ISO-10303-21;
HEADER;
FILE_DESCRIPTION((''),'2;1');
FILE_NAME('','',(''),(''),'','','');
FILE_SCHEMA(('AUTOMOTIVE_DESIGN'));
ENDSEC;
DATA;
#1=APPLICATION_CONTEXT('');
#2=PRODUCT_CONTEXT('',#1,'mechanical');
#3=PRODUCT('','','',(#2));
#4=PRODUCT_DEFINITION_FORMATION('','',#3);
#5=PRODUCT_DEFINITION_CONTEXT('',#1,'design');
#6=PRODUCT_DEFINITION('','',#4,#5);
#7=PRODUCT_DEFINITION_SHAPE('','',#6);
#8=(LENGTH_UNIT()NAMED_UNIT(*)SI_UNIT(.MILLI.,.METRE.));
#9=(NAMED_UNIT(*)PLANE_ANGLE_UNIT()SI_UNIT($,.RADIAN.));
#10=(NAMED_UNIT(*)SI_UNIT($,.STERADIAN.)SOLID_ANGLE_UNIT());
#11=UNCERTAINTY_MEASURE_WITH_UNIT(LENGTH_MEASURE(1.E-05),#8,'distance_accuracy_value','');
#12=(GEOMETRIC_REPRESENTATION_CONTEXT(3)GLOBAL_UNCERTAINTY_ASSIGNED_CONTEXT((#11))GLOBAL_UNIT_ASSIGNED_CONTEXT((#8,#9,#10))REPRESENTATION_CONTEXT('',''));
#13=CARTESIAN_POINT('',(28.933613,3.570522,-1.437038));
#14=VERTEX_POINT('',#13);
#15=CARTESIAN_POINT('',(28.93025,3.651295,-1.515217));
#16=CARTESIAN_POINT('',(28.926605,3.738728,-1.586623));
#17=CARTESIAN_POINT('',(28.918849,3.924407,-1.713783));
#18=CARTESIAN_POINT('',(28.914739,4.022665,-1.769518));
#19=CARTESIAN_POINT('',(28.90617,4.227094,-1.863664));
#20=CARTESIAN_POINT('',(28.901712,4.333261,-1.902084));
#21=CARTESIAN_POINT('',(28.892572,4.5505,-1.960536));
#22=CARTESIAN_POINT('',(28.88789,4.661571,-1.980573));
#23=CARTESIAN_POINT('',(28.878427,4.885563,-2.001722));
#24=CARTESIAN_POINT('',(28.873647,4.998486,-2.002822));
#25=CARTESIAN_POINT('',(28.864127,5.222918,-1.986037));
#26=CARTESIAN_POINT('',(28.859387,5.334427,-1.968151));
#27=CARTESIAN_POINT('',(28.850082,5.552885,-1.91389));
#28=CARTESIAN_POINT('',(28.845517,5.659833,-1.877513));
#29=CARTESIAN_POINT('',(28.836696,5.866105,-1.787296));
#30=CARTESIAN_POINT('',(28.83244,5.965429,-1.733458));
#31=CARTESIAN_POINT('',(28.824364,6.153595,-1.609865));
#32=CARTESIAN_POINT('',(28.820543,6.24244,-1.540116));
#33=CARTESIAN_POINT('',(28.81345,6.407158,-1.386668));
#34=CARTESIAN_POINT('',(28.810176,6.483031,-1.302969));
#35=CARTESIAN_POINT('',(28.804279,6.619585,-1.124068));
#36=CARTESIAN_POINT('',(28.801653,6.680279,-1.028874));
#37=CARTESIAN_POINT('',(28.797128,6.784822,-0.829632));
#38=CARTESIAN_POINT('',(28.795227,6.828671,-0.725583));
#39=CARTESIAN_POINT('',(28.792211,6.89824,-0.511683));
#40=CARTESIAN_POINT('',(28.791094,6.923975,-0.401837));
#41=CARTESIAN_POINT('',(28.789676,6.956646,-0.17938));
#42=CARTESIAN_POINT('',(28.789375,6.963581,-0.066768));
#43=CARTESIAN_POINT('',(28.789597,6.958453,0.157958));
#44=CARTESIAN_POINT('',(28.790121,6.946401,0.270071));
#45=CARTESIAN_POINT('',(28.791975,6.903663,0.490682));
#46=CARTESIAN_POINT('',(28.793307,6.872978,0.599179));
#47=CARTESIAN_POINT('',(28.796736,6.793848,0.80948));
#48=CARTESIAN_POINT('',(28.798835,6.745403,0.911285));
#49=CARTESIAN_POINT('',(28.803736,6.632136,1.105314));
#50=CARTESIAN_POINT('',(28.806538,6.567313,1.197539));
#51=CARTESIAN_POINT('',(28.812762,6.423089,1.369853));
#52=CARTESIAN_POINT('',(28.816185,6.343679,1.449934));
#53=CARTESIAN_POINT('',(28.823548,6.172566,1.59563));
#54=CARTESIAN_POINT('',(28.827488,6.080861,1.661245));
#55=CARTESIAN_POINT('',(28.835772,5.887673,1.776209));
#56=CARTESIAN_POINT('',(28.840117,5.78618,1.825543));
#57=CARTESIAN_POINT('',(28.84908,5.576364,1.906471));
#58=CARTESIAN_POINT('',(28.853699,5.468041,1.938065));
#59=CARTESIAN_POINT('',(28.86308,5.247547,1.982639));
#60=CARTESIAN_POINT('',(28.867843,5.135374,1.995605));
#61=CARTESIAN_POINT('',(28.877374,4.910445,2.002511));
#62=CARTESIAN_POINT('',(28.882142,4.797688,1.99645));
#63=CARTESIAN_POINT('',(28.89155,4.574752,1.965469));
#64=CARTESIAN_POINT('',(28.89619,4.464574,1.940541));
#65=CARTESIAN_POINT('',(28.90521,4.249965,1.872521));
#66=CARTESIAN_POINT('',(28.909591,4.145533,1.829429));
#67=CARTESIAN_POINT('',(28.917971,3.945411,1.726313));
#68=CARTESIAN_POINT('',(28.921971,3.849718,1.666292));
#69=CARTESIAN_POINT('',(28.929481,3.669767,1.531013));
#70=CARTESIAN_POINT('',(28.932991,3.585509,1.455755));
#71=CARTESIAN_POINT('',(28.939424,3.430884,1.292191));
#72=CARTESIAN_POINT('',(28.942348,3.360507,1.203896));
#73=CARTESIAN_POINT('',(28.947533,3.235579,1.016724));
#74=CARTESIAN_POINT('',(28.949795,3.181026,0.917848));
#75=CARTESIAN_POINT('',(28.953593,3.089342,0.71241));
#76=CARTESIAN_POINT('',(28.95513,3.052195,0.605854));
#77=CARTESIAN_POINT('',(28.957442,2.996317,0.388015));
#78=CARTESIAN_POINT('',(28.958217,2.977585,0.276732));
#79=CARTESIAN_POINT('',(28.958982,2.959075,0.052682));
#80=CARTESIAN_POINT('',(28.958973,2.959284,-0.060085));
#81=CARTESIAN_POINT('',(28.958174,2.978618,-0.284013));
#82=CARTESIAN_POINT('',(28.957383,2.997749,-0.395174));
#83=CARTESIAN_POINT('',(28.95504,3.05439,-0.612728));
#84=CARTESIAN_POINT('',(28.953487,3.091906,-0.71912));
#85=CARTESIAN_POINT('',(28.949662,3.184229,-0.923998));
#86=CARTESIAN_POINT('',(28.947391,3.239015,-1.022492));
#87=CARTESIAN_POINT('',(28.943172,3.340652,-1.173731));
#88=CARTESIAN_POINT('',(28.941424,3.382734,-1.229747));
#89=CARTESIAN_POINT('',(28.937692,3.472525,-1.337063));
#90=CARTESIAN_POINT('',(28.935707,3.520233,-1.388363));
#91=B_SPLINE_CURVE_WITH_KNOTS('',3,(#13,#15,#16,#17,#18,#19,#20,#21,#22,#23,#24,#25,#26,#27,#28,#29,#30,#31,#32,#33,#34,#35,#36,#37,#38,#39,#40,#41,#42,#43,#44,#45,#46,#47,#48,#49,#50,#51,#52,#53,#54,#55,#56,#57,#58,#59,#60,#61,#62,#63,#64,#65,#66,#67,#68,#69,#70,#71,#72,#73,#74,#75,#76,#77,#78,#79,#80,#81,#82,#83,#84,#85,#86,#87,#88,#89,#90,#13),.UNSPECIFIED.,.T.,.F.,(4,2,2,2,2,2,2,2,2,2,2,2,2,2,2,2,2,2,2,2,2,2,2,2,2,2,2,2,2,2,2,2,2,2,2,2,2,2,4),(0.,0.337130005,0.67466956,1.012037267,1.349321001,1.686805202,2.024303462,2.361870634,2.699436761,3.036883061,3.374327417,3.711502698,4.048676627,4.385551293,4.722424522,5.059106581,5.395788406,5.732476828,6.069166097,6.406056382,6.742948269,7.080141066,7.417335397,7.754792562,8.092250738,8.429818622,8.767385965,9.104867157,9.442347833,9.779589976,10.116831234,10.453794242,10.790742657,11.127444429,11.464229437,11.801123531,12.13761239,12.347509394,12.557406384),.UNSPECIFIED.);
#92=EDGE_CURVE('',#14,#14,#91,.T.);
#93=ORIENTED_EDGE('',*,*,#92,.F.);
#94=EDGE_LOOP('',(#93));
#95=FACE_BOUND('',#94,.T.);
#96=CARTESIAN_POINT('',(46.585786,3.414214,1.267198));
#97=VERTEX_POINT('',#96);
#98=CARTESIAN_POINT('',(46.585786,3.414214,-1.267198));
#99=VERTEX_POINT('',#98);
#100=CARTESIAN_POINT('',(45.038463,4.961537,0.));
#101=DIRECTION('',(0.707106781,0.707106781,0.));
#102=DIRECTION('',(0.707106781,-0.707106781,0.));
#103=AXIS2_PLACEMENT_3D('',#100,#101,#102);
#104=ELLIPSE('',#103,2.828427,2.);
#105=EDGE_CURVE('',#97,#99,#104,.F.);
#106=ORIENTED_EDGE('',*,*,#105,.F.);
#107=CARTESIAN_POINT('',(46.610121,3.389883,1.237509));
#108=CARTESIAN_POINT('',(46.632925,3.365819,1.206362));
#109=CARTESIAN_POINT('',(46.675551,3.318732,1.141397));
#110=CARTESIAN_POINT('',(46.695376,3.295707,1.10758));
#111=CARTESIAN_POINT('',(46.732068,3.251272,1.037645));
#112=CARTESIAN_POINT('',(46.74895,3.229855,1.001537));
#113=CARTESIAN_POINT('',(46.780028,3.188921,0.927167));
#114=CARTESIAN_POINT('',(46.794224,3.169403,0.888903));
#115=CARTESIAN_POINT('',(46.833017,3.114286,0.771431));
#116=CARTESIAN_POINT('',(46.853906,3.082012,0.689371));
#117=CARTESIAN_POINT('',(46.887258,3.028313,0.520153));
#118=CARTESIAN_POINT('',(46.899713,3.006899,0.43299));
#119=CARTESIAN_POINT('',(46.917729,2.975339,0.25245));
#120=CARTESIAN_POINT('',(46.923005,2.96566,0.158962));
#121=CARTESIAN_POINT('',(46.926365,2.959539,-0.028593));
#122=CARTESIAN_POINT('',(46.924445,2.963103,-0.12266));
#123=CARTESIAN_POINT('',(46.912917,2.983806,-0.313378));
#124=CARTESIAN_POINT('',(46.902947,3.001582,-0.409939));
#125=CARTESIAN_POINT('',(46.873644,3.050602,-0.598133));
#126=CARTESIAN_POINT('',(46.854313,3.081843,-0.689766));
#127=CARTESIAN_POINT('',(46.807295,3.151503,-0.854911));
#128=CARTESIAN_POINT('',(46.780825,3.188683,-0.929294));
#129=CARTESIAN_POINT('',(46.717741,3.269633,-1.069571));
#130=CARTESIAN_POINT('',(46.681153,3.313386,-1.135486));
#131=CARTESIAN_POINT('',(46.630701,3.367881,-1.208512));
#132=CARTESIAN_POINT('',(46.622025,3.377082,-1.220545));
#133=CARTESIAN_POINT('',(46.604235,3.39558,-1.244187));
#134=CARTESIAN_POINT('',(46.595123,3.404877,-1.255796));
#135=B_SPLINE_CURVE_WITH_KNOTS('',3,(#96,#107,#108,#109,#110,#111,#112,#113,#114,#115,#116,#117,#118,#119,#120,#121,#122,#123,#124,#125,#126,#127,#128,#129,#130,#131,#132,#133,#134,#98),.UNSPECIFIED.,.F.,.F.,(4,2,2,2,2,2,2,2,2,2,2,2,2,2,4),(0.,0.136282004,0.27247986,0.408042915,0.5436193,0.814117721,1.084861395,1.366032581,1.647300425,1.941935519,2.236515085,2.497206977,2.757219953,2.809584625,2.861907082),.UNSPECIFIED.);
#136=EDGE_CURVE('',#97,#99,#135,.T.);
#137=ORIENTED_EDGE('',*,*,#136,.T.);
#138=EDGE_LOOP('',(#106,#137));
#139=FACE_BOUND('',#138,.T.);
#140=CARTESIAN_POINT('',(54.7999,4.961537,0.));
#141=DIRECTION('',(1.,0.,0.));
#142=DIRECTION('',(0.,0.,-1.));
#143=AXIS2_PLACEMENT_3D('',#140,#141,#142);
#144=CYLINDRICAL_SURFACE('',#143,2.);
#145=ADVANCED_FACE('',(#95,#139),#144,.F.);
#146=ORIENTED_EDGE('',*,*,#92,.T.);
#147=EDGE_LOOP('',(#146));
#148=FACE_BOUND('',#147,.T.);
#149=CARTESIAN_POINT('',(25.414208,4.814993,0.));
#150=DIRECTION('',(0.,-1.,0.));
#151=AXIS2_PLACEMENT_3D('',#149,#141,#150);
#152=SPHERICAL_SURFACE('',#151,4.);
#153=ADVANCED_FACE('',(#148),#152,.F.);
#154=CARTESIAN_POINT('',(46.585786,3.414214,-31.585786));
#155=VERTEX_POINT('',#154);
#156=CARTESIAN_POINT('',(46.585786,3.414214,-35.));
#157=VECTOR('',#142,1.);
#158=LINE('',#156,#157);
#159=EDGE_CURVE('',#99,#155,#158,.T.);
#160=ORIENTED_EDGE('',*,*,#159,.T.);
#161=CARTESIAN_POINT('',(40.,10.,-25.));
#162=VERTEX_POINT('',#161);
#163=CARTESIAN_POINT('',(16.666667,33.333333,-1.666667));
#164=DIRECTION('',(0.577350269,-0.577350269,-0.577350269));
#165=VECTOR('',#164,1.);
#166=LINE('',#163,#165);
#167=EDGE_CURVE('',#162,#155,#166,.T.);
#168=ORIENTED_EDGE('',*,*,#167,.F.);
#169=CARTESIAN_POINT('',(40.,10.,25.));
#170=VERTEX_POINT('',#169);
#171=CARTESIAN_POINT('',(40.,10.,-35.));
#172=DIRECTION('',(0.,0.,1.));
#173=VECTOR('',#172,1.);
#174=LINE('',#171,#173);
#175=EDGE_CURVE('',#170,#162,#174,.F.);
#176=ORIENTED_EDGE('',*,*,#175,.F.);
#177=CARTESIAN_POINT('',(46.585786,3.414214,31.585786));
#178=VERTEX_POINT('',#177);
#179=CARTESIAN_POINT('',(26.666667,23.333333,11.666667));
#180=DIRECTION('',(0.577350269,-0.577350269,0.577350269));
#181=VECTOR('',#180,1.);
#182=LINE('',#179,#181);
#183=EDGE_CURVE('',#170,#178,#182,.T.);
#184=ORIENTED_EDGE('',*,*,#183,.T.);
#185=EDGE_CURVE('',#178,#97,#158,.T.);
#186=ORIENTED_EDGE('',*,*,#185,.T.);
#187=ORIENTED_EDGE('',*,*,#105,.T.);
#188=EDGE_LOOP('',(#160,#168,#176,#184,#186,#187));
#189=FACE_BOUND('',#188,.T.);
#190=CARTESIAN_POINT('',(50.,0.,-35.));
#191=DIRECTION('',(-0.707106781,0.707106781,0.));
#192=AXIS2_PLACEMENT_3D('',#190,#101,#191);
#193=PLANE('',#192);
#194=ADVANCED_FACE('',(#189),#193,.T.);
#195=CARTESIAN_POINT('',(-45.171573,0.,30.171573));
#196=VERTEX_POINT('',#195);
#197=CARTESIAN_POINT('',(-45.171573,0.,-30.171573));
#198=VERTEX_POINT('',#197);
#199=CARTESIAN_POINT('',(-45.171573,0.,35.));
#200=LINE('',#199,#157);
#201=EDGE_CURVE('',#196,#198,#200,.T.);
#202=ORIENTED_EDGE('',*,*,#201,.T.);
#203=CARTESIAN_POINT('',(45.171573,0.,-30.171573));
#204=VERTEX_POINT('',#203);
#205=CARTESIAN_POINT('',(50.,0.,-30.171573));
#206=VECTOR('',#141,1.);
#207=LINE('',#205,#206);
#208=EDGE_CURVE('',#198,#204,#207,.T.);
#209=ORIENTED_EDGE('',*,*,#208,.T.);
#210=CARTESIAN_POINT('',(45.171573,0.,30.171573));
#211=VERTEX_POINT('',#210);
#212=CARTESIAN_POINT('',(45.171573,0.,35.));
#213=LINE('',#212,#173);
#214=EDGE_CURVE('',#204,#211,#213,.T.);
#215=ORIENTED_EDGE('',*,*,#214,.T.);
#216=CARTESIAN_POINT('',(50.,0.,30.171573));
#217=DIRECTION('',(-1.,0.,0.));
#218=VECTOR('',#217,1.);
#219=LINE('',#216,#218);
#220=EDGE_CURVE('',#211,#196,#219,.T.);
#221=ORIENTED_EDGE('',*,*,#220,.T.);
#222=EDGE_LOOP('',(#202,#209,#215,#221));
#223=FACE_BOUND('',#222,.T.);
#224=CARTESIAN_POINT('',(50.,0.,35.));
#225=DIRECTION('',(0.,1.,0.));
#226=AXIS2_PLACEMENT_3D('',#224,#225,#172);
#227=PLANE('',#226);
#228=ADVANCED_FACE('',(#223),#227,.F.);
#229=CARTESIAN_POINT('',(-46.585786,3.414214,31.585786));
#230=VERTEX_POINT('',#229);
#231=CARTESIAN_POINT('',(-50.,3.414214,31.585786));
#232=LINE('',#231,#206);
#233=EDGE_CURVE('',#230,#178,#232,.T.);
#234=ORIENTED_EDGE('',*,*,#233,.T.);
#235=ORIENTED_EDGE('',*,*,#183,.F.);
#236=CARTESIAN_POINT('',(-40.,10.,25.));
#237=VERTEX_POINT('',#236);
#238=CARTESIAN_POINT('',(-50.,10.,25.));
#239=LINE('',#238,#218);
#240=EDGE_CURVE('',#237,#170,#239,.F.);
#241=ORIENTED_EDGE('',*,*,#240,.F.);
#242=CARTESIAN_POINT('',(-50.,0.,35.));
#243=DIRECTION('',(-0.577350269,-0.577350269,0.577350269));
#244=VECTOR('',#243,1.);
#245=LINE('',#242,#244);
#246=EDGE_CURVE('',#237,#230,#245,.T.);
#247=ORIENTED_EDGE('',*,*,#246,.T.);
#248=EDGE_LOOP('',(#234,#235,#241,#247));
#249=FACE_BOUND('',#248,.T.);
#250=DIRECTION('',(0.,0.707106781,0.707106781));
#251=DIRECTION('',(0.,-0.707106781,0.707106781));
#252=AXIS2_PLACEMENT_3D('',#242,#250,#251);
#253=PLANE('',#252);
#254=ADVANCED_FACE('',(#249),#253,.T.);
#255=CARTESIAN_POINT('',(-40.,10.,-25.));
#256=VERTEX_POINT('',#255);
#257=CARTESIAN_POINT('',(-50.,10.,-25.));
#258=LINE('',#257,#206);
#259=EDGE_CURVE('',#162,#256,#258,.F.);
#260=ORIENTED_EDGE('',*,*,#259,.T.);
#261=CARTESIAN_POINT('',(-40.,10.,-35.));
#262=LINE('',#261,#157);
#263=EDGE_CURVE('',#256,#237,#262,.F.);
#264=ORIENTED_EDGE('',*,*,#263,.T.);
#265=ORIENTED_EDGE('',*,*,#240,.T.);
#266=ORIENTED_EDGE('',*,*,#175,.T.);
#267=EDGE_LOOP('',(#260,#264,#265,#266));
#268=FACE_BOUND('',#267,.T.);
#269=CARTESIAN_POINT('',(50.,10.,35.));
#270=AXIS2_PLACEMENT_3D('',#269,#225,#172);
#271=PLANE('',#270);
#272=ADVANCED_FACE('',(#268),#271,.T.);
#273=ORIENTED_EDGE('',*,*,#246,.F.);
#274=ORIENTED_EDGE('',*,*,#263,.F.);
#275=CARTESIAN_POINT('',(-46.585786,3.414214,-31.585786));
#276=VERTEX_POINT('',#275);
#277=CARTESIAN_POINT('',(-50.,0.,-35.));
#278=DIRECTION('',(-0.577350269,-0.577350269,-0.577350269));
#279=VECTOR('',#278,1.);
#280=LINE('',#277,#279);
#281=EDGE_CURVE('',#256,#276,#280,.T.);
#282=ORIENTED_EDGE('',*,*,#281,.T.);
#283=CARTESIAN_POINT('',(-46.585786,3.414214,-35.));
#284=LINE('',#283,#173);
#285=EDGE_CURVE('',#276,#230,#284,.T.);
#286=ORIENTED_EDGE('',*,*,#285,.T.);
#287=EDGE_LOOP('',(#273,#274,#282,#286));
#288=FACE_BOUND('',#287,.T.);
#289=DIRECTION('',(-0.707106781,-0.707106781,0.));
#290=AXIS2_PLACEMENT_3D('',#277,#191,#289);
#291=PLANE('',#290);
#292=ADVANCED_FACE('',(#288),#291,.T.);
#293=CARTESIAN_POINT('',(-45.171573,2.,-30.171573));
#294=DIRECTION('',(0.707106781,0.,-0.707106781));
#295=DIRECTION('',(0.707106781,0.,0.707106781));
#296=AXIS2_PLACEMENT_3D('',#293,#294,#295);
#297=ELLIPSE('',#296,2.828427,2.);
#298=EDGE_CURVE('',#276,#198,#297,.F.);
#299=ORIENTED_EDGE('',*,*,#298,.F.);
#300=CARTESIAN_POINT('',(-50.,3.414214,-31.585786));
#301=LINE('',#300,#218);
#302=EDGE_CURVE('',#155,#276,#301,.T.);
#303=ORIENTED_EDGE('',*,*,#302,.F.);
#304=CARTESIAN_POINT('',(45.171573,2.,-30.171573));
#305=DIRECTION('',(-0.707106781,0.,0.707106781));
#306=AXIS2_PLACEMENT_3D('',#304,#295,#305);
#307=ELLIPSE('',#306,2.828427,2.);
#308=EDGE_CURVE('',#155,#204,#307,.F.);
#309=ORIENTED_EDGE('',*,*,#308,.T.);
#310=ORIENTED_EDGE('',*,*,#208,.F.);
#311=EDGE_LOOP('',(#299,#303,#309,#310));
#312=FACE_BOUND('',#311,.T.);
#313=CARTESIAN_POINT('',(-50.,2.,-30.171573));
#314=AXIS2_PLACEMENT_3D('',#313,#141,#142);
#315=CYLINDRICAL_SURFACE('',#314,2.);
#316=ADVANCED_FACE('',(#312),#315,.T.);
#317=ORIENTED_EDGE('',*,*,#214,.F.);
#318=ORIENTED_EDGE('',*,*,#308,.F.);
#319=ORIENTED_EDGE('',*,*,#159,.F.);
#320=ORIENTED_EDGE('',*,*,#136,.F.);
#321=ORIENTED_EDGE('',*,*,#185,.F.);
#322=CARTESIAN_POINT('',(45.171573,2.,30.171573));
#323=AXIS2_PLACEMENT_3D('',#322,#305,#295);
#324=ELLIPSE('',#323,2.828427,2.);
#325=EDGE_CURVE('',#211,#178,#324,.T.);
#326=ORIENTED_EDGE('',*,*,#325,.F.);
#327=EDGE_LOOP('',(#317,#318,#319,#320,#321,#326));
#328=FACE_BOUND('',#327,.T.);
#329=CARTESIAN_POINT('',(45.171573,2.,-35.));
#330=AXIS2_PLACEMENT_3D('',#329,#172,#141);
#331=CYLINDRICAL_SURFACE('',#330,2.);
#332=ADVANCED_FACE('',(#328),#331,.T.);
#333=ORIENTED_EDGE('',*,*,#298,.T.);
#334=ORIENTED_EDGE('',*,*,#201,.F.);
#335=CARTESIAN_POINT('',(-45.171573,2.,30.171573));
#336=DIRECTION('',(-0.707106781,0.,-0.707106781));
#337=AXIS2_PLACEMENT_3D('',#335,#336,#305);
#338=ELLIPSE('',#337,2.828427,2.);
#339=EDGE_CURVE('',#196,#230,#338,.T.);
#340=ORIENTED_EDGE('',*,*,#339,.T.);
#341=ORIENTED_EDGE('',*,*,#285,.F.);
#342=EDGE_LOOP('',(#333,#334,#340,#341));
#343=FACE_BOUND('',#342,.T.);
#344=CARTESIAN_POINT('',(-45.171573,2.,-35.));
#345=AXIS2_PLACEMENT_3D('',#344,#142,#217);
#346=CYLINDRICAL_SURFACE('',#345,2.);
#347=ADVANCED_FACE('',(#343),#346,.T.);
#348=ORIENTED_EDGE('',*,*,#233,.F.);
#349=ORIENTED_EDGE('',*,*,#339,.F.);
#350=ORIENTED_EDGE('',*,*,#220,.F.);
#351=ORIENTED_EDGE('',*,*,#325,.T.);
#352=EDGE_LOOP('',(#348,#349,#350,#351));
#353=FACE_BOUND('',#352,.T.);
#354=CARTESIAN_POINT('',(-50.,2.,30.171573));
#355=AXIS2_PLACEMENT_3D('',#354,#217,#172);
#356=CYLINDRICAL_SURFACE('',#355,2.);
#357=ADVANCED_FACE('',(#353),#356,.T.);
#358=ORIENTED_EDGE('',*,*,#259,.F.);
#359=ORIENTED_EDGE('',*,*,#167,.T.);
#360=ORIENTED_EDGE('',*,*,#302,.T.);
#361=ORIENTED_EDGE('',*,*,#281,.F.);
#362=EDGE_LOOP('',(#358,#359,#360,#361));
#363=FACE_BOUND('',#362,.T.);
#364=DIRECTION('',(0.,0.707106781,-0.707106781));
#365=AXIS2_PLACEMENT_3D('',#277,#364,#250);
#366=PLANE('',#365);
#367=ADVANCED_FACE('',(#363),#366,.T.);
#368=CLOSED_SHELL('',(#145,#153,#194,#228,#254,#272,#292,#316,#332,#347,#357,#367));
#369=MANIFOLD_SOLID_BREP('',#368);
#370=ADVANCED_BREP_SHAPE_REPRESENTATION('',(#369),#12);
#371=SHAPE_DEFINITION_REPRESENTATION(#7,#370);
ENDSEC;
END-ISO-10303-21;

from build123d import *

# Parameters (mm, degrees)
SKETCH_1_W      = 100
SKETCH_1_H      = 70
EXTRUDE_1_DEPTH = 10
EXTRUDE_1_TAPER = 45
SKETCH_5_W      = 28.87382981
SKETCH_5_H      = 2
FILLET_1_R      = 2


with BuildPart() as part:
    # 草图1 → 凸台-拉伸1 (new body)
    with BuildSketch(Plane(origin=(0, 0, 0), x_dir=(1, 0, 0), z_dir=(0, 1, 0))):
        Rectangle(SKETCH_1_W, SKETCH_1_H)
    extrude(amount=EXTRUDE_1_DEPTH, taper=EXTRUDE_1_TAPER)

    # 草图2 one side → 切除-旋转2 (revolve, cut)
    with BuildSketch(Plane.XY):
        with BuildLine():
            ThreePointArc((21.414207954, 4.814992755), (25.414207954, 0.814992755), (29.414207954, 4.814992755))
            Line((29.414207954, 4.814992755), (21.414207954, 4.814992755))
        make_face()
    revolve(axis=Axis((65.414207954, 4.814992755, 0), (-1, 0, 0)), mode=Mode.SUBTRACT)

    # 草图5 → 切除-旋转4 (revolve, cut)
    with BuildSketch(Plane.XY, mode=Mode.PRIVATE) as cut_revolve_4_sk:
        with Locations((40.362985489, 5.961536801)):
            Rectangle(SKETCH_5_W, SKETCH_5_H)
    revolve(cut_revolve_4_sk.sketch.rotate(Axis((54.799900394, 4.961536801, 0), (-1, 0, 0)), 134.067661737), axis=Axis((54.799900394, 4.961536801, 0), (-1, 0, 0)), mode=Mode.SUBTRACT)

    # 圆角1
    # the kernel refuses this fillet: 2 mm, written as the material it takes off along each edge
    with BuildSketch(Plane(origin=(-62.071067812, 0, 35), x_dir=(0, 0.7071067811865464, -0.7071067811865487), z_dir=(1, 0, 0)), Plane(origin=(62.071067812, 0, -35), x_dir=(0, 0.7071067811865461, 0.707106781186549), z_dir=(-1, 0, 0))) as fillet_1_piece_1:
        with BuildLine():
            CenterArc((FILLET_1_R * 2.41421356237, -FILLET_1_R), FILLET_1_R, 90, 135)
            Line((FILLET_1_R * 1.70710678119, -FILLET_1_R * 1.70710678119), (0, 0))
            Line((0, 0), (FILLET_1_R * 2.41421356237, 0))
        make_face()
    extrude(amount=124.142135624, mode=Mode.SUBTRACT)
    with BuildSketch(Plane(origin=(-50, 0, -47.071067812), x_dir=(0.7071067811865483, 0.7071067811865466, 0), z_dir=(0, 0, 1)), Plane(origin=(50, 0, 47.071067812), x_dir=(-0.7071067811865485, 0.7071067811865467, 0), z_dir=(0, 0, -1))) as fillet_1_piece_2:
        with BuildLine():
            CenterArc((FILLET_1_R * 2.41421356237, -FILLET_1_R), FILLET_1_R, 90, 135)
            Line((FILLET_1_R * 1.70710678119, -FILLET_1_R * 1.70710678119), (0, 0))
            Line((0, 0), (FILLET_1_R * 2.41421356237, 0))
        make_face()
    extrude(amount=94.142135624, mode=Mode.SUBTRACT)


solid = part.part
